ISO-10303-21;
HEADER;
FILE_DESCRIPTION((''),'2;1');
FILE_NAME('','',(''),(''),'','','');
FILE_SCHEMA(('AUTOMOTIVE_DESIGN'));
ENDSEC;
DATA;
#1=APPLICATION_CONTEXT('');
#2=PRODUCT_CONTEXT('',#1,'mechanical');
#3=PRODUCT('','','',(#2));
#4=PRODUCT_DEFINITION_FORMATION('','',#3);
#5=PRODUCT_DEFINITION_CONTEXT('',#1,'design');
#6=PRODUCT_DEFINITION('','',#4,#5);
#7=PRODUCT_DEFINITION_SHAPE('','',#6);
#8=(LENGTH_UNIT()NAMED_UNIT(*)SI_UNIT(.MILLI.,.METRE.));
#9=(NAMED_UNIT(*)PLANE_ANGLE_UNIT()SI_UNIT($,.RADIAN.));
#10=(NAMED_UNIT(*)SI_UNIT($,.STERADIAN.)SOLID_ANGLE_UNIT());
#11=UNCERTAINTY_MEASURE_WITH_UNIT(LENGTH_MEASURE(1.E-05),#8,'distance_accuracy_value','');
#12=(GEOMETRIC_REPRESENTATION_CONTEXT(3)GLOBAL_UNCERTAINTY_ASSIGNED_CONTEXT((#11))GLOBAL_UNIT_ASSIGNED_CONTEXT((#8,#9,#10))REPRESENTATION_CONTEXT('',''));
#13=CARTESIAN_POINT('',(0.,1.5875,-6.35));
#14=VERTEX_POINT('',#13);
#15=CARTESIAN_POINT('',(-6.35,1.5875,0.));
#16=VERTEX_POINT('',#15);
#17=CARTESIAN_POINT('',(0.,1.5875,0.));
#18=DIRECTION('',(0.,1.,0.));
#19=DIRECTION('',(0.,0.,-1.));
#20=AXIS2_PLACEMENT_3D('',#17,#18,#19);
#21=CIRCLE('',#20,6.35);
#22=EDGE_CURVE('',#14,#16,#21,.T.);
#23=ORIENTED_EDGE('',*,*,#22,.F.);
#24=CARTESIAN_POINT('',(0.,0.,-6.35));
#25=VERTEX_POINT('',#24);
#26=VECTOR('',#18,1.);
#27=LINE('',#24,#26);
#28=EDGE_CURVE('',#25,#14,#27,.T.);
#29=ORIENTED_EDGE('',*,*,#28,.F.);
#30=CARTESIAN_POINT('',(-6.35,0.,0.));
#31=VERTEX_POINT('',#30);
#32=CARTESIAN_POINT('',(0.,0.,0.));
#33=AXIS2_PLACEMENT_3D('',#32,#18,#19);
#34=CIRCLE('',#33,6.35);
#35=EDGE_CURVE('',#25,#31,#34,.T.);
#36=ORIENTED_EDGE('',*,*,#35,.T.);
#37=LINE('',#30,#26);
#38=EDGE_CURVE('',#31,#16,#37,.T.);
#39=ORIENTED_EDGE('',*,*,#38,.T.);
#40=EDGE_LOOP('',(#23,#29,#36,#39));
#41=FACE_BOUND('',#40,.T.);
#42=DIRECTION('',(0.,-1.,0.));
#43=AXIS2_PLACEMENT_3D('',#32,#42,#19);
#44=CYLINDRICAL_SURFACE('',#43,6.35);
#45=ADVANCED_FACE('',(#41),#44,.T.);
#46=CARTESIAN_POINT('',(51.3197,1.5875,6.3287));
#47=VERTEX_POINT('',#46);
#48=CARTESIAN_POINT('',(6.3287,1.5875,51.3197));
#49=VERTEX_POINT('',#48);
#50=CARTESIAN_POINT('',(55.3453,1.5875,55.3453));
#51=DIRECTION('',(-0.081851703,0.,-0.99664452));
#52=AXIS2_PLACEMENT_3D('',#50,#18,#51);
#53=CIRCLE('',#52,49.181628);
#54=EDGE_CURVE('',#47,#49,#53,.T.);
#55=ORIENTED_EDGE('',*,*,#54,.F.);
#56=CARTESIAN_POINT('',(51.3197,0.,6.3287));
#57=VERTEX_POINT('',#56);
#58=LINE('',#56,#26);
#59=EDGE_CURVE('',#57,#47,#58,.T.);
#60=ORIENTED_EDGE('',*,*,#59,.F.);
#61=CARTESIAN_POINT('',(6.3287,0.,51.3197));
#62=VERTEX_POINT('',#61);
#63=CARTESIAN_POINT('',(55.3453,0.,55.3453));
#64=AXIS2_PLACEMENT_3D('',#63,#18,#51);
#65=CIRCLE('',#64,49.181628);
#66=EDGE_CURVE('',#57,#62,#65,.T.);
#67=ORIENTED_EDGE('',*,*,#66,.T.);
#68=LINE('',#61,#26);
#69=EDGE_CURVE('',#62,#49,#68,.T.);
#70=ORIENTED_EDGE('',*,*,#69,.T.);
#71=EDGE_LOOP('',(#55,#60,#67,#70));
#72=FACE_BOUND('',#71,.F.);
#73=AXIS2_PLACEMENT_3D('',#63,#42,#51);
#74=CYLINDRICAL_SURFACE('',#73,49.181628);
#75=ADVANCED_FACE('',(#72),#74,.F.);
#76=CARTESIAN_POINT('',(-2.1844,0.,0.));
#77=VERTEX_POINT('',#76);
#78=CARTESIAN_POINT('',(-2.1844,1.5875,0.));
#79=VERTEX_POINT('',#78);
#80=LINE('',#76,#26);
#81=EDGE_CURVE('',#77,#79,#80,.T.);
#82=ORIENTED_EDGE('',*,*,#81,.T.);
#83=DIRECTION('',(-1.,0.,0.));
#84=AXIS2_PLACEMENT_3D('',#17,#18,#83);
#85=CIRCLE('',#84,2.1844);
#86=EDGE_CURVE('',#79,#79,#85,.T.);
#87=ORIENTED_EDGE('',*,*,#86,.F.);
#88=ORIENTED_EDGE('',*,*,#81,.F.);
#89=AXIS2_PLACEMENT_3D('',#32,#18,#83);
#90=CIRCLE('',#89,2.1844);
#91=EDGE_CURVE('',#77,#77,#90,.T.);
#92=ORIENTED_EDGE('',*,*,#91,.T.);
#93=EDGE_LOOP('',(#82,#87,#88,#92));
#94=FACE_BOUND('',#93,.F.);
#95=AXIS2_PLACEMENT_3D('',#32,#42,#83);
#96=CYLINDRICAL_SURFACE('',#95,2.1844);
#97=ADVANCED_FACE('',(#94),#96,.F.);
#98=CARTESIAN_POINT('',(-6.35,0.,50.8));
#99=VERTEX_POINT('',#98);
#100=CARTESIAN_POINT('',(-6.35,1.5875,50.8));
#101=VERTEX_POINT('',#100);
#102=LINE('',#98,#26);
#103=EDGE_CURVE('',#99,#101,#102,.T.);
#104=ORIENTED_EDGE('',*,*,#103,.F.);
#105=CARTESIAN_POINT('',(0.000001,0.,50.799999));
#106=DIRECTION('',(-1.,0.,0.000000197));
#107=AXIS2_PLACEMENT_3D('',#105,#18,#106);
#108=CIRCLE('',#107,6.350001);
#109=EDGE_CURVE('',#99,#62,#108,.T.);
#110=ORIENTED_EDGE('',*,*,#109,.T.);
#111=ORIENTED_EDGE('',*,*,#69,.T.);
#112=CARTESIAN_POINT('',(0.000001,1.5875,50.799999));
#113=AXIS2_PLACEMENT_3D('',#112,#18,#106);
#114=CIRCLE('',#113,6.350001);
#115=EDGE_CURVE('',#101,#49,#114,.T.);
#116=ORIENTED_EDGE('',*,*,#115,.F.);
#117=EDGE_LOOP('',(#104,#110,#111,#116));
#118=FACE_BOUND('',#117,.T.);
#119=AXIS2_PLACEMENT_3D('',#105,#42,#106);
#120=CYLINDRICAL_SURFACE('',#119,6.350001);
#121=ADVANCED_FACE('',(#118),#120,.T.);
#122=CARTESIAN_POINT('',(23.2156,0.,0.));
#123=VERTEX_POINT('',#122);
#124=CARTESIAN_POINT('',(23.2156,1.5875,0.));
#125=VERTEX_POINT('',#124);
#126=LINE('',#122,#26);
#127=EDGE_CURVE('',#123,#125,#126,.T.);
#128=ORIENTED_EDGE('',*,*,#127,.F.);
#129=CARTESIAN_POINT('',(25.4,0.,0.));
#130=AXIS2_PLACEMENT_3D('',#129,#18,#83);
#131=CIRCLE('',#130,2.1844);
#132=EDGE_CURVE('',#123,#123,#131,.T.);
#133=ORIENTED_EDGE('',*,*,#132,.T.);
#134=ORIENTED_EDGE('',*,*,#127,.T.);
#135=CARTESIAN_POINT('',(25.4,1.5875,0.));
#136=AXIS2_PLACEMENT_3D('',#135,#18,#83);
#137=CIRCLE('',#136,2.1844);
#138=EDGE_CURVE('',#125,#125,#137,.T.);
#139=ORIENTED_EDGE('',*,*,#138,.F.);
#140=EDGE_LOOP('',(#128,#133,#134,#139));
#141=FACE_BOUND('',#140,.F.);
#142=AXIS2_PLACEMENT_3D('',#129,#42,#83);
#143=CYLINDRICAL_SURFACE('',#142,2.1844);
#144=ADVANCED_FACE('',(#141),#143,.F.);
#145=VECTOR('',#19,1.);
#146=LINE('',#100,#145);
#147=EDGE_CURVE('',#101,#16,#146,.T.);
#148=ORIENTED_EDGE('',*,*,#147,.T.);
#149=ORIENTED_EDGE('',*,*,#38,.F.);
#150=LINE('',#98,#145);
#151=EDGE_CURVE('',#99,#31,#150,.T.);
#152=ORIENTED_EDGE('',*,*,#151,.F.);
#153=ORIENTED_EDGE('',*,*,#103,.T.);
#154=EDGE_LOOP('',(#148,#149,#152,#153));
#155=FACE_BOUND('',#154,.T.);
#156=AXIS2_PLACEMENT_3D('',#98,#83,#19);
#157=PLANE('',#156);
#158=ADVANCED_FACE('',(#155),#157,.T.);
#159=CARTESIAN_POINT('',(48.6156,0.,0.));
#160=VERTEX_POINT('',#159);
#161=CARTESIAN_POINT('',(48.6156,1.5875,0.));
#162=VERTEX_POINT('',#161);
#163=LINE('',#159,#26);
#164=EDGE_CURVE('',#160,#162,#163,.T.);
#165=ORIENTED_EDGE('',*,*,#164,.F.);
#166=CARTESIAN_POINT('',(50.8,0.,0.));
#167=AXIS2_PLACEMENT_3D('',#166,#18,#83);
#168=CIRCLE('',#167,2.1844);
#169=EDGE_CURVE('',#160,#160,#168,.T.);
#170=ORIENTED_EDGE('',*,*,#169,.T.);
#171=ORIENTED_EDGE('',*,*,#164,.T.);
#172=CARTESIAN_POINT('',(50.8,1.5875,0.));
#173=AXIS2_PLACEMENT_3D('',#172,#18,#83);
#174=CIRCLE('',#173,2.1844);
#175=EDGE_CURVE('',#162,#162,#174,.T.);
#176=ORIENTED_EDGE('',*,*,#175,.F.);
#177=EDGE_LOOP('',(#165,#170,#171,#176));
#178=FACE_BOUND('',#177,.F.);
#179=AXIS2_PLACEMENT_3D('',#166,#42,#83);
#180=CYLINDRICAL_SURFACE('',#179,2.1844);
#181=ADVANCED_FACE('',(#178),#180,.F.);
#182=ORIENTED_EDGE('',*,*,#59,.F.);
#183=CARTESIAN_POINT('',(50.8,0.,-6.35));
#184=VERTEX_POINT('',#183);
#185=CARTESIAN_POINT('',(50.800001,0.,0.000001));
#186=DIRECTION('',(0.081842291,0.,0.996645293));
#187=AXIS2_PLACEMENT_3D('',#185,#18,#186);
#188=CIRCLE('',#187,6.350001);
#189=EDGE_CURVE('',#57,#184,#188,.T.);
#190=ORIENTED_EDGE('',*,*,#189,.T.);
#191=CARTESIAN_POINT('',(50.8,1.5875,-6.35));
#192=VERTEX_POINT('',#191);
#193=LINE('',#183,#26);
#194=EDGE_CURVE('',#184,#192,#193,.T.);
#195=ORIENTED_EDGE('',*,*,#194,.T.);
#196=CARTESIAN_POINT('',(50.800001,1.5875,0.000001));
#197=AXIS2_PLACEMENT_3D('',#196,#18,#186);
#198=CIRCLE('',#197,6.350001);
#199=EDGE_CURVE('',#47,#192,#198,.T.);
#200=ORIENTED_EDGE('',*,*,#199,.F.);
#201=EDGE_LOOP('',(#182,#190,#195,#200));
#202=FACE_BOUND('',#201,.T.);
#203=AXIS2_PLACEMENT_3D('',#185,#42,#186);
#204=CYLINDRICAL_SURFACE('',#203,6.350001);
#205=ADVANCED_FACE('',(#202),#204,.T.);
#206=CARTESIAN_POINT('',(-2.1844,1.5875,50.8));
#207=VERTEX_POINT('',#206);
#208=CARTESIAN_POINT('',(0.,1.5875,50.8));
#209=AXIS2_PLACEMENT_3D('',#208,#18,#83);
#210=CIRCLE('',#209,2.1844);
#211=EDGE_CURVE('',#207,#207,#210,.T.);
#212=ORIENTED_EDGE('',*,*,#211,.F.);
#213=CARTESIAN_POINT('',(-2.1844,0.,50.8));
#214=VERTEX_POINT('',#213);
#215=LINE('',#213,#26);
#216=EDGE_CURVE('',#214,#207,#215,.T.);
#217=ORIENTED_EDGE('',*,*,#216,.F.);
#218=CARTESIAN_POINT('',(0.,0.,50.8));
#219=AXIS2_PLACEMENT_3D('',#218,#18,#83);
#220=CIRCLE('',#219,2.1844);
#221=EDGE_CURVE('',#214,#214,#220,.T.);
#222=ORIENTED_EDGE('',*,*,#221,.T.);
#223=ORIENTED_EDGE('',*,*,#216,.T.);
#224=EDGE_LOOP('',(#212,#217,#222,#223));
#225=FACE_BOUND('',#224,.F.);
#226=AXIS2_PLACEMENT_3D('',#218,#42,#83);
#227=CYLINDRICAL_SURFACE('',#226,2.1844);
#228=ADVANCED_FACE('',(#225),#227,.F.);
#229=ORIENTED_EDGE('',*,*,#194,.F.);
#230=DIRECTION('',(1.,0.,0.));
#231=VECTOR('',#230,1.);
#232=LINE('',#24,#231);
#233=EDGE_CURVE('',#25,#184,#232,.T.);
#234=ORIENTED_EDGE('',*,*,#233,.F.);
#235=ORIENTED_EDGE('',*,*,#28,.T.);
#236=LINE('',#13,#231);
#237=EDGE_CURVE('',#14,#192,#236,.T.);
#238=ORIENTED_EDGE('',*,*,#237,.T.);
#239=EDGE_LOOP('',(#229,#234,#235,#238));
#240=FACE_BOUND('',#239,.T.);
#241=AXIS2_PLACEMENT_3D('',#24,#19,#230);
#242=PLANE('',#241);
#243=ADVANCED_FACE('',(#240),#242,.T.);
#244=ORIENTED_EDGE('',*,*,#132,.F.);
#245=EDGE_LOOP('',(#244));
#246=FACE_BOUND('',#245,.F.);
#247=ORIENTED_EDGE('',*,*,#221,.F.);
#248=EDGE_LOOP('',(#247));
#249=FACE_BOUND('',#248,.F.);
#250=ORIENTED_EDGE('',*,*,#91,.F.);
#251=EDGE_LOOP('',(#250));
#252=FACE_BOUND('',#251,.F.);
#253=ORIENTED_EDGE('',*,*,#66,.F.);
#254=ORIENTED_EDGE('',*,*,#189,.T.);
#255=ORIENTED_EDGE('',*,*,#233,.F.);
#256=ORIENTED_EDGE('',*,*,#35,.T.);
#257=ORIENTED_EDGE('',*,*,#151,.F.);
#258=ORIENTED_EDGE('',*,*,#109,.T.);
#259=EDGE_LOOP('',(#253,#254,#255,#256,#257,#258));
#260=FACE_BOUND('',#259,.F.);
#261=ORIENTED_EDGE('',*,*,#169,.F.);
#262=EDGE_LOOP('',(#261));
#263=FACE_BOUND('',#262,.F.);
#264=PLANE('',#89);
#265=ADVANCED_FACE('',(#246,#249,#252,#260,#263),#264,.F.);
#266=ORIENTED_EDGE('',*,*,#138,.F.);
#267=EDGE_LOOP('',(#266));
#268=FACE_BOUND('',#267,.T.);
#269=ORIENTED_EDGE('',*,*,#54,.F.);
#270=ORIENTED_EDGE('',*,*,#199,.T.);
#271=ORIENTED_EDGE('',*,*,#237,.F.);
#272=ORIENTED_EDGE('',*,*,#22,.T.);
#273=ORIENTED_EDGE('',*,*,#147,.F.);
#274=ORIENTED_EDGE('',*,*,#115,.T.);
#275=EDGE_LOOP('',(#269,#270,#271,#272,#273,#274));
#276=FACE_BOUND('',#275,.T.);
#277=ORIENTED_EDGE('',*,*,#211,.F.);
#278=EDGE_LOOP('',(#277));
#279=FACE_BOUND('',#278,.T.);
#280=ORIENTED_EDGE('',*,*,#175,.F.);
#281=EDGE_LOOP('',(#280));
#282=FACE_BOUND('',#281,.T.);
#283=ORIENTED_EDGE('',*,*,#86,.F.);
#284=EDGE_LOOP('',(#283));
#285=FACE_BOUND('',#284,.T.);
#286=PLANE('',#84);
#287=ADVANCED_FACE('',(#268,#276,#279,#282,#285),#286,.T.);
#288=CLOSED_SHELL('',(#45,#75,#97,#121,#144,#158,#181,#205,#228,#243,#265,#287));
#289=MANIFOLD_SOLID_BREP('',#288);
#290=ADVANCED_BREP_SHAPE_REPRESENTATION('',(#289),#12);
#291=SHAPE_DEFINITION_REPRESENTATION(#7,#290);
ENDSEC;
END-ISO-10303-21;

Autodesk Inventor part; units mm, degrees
ref_plane "YZ Plane" through (0, 0, 0) normal (1, 0, 0) x (0, 1, 0)
ref_plane "XZ Plane" through (0, 0, 0) normal (0, 1, 0) x (-1, 0, 0)
ref_plane "XY Plane" through (0, 0, 0) normal (0, 0, 1) x (1, 0, 0)
sketch "main" plane through (0, 0, 0) normal (0, 0, 1) x (1, 0, 0)
  circle A0 centre (27.8145, 23.5161) radius 2.1844
  circle A1 centre (27.8145, -27.2839) radius 2.1844
  circle A2 centre (-22.9855, -27.2839) radius 2.1844
  arc A3 (-23.5053, -20.9552) -> (-22.9855, -33.6339) centre (-22.9855, -27.2839) ccw
  arc A4 (27.8145, -33.6339) -> (34.1645, -27.2839) centre (27.8145, -27.2839) ccw
  arc A5 (34.1645, 23.5161) -> (21.4858, 24.0358) centre (27.8145, 23.5161) ccw
  line L0 (34.1645, 23.5161) -> (34.1645, -27.2839)
  line L1 (27.8145, -33.6339) -> (-22.9855, -33.6339)
  arc A6 (-23.5053, -20.9552) -> (21.4858, 24.0358) centre (-27.5308, 28.0614) ccw
  point P0 (11.2944, -10.7639)
sketch "Sketch1" plane through (0, 0, 0) normal (0, 1, 0) x (-1, 0, 0)
  circle A0 centre (-25.4, 0) radius 2.1844
  circle A1 centre (0, 50.8) radius 2.1844
  circle A2 centre (0, 0) radius 2.1844
  circle A3 centre (-50.8, 0) radius 2.1844
  arc A4 (-51.3197, 6.3287) -> (-50.8, -6.35) centre (-50.8, 0) ccw
  arc A5 (0, -6.35) -> (6.35, 0) centre (0, 0) ccw
  arc A6 (6.35, 50.8) -> (-6.3287, 51.3197) centre (0, 50.8) ccw
  line L0 (6.35, 50.8) -> (6.35, 0)
  line L1 (0, -6.35) -> (-50.8, -6.35)
  arc A7 (-51.3197, 6.3287) -> (-6.3287, 51.3197) centre (-55.3453, 55.3453) ccw
  dimension "d2" = 4.3688
extrude "Extrusion1" add sketch "Sketch1" along normal blind 1.5875
equation "\"BendRadius\" = Thickness"
equation "\"BendReliefWidth\" = Thickness"
equation "\"BendReliefDepth\" = 0.5 * Thickness"
equation "\"CornerReliefSize\" = 4 * Thickness"
equation "\"MinimumRemnant\" = 2 * Thickness"
equation "\"TransitionRadius\" = BendRadius"
equation "\"JacobiRadiusSize\" = BendRadius"
equation "\"GapSize\" = Thickness"
equation "\"Thickness\" = 1.5875"
properties part number "Arm Triangle Gusset" material "Acetal Resin, White"
